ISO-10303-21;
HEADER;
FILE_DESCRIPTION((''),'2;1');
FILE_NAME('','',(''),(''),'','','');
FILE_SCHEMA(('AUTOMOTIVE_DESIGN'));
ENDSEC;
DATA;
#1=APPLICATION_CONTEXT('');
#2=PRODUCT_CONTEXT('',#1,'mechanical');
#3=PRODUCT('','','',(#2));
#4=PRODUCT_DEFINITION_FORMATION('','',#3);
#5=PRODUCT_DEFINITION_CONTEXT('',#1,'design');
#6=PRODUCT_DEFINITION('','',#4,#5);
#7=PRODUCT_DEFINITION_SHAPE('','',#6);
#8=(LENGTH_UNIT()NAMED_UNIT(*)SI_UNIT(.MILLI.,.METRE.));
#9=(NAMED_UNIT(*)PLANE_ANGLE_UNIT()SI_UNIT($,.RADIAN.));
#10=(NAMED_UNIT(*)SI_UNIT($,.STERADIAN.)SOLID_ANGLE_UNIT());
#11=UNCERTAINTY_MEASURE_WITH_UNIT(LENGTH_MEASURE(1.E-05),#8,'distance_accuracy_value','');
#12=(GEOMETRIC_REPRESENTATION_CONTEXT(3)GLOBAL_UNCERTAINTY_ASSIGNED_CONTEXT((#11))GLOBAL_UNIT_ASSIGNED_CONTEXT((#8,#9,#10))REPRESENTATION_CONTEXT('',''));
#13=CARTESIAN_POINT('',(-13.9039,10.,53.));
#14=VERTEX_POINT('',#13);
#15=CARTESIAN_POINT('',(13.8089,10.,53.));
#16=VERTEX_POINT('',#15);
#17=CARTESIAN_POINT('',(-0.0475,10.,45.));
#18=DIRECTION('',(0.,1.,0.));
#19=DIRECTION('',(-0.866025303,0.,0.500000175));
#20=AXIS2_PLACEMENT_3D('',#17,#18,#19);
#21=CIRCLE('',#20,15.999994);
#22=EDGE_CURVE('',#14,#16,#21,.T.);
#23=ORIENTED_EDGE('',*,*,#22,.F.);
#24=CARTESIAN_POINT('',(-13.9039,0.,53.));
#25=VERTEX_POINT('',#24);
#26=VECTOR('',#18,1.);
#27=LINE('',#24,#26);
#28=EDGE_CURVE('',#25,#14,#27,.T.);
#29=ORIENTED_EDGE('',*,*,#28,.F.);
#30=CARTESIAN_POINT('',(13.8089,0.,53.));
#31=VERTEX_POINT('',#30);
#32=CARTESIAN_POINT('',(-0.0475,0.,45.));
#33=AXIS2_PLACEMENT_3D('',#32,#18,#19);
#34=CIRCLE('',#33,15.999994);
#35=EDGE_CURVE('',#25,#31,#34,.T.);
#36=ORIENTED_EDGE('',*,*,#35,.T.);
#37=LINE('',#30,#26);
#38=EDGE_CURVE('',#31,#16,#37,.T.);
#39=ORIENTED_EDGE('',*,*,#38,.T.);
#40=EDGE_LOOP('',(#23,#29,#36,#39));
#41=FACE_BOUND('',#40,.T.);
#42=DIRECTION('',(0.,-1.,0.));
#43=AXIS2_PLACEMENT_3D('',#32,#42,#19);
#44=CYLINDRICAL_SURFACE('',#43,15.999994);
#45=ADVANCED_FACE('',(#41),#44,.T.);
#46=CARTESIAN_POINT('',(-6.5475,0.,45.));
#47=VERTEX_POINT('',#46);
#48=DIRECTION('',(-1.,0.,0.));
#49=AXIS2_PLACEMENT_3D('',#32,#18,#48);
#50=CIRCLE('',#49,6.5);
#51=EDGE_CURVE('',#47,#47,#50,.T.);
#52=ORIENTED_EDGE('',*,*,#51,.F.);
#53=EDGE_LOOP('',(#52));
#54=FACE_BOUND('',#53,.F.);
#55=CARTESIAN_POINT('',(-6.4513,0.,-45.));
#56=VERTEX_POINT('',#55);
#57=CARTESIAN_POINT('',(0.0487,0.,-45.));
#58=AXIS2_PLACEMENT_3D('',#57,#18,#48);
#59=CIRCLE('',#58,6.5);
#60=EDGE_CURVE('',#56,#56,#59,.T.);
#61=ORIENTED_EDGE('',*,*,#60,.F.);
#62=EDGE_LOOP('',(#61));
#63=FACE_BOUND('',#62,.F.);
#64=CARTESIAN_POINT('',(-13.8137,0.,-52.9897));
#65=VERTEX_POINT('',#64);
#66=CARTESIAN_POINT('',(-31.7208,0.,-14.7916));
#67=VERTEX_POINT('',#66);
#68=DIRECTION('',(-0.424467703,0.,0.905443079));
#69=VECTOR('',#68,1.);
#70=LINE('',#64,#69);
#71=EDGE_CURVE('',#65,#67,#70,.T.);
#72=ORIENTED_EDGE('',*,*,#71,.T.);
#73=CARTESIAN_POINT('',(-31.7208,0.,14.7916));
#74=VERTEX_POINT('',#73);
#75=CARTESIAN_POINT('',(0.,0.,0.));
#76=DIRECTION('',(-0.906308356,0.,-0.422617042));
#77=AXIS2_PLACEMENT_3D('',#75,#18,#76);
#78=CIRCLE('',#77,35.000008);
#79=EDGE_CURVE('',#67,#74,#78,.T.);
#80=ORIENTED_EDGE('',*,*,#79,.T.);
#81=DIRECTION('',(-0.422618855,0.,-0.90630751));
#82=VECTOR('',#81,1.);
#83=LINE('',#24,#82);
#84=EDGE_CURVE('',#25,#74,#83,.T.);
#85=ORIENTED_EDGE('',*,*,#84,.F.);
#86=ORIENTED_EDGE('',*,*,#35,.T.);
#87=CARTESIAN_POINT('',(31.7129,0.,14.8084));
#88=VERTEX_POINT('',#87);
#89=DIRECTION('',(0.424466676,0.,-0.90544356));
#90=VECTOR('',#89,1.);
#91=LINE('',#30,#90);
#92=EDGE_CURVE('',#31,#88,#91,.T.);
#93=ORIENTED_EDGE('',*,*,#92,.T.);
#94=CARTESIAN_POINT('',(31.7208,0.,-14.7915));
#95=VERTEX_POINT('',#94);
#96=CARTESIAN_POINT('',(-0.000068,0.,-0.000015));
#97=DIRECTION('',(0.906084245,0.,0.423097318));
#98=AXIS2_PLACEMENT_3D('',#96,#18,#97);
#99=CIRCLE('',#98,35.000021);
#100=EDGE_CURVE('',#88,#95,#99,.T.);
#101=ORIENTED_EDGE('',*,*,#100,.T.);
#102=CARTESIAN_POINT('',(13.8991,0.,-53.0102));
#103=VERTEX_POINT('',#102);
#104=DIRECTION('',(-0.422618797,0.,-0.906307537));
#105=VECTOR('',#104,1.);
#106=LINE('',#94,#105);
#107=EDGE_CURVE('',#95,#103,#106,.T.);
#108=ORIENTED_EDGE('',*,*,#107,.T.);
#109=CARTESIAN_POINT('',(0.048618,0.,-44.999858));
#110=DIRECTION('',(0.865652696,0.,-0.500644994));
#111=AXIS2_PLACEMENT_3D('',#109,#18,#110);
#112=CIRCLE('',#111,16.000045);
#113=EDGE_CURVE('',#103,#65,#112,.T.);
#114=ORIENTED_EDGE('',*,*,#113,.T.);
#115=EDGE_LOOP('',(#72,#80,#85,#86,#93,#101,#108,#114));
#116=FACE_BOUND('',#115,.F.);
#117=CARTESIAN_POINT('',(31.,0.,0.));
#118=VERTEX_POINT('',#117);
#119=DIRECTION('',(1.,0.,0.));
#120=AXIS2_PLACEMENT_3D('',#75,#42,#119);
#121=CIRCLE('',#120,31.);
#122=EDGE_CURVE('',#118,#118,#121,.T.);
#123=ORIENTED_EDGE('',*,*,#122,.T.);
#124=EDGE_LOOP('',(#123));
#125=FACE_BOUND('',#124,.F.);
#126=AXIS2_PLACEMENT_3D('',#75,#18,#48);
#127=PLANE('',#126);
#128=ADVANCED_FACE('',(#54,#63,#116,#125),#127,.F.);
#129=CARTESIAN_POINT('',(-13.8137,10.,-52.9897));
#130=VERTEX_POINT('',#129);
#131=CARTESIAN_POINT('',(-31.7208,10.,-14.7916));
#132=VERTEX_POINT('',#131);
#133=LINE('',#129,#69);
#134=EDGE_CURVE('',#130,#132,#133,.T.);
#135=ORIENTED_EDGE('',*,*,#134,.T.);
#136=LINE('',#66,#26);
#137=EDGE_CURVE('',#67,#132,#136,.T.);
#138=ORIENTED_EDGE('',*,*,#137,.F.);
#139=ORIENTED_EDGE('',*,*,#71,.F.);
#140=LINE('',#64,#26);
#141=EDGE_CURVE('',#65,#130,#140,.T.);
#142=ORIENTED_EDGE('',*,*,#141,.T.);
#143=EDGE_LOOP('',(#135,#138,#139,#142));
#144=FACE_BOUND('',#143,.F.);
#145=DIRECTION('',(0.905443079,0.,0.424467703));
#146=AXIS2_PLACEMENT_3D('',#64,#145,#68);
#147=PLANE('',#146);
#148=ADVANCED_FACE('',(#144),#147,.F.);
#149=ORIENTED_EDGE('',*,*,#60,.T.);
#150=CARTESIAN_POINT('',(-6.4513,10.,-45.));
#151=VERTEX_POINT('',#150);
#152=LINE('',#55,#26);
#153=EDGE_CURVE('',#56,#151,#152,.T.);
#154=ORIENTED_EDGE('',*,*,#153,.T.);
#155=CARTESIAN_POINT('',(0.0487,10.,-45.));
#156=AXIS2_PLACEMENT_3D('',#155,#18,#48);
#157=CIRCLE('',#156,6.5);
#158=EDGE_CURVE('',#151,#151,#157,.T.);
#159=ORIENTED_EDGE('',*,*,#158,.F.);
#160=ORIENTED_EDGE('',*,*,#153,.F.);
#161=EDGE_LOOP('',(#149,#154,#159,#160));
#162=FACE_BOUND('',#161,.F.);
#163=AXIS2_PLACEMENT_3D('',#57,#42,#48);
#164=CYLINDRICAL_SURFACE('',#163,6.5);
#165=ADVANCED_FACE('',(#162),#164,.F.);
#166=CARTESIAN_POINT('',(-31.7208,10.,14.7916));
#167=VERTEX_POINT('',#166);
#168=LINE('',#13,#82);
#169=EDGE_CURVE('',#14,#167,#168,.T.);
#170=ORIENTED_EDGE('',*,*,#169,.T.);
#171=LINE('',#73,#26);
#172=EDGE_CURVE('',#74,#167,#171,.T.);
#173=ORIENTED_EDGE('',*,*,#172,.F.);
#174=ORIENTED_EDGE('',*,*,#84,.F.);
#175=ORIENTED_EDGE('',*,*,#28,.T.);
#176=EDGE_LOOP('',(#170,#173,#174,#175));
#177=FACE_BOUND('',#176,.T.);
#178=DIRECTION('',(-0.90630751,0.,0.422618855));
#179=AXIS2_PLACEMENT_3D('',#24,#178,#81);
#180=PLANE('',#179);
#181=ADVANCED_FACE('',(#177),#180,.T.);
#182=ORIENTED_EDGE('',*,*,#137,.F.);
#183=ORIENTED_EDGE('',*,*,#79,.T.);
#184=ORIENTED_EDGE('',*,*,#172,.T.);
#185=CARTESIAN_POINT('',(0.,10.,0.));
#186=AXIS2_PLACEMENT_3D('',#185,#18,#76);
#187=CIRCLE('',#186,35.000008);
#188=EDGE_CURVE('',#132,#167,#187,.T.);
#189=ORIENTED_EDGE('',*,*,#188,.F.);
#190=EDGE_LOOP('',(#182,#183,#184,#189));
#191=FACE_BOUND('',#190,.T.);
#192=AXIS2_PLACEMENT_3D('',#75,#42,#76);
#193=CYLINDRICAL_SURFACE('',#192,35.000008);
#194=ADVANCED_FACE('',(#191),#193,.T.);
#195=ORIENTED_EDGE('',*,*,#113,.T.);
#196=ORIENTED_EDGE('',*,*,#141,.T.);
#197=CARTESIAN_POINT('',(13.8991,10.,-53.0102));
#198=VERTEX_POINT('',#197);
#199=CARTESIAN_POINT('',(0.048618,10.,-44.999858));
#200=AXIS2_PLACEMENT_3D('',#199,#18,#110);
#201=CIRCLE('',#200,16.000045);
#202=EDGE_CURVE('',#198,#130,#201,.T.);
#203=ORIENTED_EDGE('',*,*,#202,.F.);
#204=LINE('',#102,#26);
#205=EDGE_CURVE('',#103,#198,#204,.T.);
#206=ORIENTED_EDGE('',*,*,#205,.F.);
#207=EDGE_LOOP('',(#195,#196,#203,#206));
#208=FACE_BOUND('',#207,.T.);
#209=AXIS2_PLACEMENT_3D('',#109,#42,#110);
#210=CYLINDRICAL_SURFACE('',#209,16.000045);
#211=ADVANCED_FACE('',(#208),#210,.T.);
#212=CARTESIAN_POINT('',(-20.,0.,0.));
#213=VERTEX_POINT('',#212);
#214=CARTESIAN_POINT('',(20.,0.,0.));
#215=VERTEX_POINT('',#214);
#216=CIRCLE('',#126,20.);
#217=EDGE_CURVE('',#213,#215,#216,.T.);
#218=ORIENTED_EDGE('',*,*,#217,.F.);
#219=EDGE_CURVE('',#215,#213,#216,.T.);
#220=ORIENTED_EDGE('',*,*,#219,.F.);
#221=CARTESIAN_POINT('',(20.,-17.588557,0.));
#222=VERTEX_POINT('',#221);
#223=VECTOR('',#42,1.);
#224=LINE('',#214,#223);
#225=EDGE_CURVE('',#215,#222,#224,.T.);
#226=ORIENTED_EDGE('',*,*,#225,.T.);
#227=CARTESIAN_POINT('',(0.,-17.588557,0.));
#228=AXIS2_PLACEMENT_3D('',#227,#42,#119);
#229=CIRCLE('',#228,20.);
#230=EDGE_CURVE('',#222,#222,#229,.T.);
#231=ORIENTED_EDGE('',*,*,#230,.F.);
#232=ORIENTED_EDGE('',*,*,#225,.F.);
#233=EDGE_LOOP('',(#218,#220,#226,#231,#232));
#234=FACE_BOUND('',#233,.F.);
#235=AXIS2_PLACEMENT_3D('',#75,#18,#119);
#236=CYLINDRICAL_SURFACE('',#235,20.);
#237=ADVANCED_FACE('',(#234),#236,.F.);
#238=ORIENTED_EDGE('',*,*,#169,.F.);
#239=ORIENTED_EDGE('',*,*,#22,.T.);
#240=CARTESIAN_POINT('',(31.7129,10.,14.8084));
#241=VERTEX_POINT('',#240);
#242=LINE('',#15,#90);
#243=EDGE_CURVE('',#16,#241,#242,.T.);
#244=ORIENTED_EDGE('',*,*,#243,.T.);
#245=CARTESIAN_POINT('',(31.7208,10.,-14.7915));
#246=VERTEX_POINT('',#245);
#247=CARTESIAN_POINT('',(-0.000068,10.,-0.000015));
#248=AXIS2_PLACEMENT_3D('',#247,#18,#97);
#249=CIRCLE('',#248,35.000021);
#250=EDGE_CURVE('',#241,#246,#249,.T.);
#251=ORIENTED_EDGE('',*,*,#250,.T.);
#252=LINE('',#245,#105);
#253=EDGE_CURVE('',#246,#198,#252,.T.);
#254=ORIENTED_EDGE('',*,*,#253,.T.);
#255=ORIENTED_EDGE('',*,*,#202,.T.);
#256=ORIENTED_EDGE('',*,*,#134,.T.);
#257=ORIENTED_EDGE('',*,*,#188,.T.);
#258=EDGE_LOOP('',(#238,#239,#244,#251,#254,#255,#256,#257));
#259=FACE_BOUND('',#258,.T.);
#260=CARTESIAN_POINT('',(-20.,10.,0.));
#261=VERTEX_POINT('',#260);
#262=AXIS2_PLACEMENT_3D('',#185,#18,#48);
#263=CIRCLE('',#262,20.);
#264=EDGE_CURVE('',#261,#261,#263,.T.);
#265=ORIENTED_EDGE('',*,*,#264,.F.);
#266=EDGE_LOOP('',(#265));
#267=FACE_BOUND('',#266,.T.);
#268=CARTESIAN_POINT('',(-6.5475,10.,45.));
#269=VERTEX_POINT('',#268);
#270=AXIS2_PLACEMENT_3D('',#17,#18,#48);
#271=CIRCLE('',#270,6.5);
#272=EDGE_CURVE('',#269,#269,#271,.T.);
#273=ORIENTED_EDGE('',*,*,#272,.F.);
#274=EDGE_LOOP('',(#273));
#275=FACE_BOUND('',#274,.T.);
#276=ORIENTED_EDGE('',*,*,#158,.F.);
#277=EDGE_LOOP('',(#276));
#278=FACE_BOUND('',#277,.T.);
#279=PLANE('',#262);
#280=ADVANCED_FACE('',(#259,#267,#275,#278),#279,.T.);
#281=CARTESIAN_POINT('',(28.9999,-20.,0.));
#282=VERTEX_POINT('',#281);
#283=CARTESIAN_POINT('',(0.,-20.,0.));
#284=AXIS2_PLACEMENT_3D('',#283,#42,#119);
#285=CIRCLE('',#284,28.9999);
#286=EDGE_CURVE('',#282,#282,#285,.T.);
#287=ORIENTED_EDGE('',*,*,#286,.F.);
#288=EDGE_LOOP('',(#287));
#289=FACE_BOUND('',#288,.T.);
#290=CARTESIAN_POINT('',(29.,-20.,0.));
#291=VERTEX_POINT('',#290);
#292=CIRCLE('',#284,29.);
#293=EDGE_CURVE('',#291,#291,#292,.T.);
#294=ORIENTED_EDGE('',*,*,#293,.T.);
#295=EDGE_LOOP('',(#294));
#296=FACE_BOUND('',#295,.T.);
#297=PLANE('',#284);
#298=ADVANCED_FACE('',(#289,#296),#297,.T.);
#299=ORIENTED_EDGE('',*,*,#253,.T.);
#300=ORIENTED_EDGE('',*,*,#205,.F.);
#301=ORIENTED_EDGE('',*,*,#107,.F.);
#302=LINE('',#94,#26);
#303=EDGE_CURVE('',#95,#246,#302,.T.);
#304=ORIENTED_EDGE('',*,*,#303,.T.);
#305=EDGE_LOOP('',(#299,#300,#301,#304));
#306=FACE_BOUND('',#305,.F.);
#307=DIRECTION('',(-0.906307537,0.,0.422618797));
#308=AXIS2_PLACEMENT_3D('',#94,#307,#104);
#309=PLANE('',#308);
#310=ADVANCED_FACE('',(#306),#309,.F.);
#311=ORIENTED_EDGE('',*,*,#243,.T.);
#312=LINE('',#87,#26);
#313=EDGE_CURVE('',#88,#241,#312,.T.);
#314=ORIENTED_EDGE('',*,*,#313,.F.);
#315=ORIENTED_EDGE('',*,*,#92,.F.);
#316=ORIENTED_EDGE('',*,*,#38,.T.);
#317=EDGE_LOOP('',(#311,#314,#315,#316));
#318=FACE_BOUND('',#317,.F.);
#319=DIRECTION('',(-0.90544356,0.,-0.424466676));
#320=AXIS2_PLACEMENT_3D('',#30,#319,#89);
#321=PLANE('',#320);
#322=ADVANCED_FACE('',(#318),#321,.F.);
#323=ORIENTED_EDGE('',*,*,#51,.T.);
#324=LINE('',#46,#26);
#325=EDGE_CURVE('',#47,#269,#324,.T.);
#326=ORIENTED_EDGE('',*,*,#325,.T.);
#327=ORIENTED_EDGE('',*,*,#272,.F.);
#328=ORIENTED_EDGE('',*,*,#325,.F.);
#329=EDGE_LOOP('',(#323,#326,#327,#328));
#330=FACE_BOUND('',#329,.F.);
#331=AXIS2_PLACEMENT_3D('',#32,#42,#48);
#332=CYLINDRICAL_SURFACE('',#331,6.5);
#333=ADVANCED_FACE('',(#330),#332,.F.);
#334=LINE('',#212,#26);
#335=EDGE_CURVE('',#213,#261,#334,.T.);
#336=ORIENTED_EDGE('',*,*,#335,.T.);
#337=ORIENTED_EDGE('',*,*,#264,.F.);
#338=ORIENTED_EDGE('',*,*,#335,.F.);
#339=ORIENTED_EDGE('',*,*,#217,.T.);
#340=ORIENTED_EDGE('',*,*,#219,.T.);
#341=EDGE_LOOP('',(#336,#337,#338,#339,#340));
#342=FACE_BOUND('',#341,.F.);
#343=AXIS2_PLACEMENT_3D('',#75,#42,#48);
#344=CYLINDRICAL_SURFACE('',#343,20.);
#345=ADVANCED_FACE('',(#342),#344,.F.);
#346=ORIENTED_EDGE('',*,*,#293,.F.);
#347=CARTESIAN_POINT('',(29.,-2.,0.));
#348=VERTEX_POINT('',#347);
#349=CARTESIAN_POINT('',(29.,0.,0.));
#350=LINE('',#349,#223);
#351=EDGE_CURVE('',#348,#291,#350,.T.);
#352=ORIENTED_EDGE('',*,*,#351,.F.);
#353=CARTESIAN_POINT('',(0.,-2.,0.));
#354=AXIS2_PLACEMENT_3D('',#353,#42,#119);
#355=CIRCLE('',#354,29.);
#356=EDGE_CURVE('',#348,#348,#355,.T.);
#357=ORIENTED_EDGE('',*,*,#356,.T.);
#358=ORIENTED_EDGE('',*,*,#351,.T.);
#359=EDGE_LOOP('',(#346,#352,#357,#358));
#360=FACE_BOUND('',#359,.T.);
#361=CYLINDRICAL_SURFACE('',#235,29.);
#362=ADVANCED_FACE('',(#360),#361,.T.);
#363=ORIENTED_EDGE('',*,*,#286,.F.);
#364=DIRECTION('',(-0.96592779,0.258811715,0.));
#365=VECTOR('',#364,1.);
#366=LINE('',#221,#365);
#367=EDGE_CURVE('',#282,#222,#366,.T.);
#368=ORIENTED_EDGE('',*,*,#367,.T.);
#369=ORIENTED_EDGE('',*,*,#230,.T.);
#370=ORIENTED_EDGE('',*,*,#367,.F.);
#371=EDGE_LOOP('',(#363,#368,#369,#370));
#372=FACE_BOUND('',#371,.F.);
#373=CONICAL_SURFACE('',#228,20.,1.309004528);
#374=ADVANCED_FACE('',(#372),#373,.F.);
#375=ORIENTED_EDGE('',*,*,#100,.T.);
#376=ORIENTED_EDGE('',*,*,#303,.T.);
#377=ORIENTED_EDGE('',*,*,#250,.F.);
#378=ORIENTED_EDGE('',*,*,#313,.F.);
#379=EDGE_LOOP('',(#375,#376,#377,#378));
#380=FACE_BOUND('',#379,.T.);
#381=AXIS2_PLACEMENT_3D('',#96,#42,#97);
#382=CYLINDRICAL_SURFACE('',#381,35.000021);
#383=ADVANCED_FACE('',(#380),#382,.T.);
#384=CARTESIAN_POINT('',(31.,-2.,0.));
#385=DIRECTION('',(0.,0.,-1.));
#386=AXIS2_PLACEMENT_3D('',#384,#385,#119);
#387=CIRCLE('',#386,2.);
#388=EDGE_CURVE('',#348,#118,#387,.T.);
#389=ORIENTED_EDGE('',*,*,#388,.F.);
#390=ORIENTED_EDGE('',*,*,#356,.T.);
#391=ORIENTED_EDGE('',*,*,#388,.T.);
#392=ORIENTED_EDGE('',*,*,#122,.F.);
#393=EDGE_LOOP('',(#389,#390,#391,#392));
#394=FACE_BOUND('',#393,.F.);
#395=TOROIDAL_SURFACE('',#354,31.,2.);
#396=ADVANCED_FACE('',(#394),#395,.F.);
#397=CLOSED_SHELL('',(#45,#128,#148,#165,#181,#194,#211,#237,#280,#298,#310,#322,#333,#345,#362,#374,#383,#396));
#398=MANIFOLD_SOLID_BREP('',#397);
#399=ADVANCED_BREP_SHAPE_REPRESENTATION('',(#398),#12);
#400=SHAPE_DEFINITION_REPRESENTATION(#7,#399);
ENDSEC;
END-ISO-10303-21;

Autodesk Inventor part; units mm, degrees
ref_plane "YZ Plane" through (0, 0, 0) normal (1, 0, 0) x (0, 1, 0)
ref_plane "XZ Plane" through (0, 0, 0) normal (0, 1, 0) x (-1, 0, 0)
ref_plane "XY Plane" through (0, 0, 0) normal (0, 0, 1) x (1, 0, 0)
sketch "スケッチ1" plane through (0, 0, 0) normal (0, 1, 0) x (-1, 0, 0)
  circle A0 centre (0, 0) radius 20
  circle A1 centre (0, 0) radius 29
  arc A2 (31.7208, -14.7916) -> (31.7208, 14.7916) centre (0, 0) ccw
  line L0 (0, 0) -> (31.7208, 14.7916) construction
  line L1 (0, 0) -> (35, 0) construction
  line L2 (0, 0) -> (31.7208, -14.7916) construction
  arc A3 (-31.7129, 14.8084) -> (-31.7208, -14.7915) centre (0, 0) ccw
  circle A4 centre (0.0475, 45) radius 6.5
  circle A5 centre (-0.0487, -45) radius 6.5
  arc A6 (13.9039, 53) -> (-13.8089, 53) centre (0.0475, 45) ccw
  line L3 (0.0475, 45) -> (13.9039, 53) construction
  line L4 (0.0475, 45) -> (16.0475, 45) construction
  line L5 (0.0475, 45) -> (-13.8089, 53) construction
  arc A7 (-13.8991, -53.0102) -> (13.8137, -52.9897) centre (-0.0487, -45) ccw
  line L6 (-0.0487, -45) -> (-13.8991, -53.0102) construction
  line L7 (-0.0487, -45) -> (13.8137, -52.9897) construction
  line L8 (13.9039, 53) -> (31.7208, 14.7916)
  line L9 (-13.8089, 53) -> (-31.7129, 14.8084)
  line L10 (-31.7208, -14.7915) -> (-13.8991, -53.0102)
  line L11 (13.8137, -52.9897) -> (31.7208, -14.7916)
  dimension "d0" = 40
  dimension "d1" = 58
  dimension "d2" = 35
  dimension "d3" = 25
  dimension "d4" = 50
  dimension "d5" = 35
  dimension "d6" = 13
  dimension "d7" = 13
  dimension "d8" = 45
  dimension "d9" = 45
  dimension "d10" = 16
  dimension "d11" = 30
  dimension "d12" = 120
  dimension "d13" = 16
  dimension "d14" = 120
extrude "押し出し1" add sketch "スケッチ1" along normal blind 10 contours A1 | L11 A7 L10 A3 L9 A6 L8 A2
sketch "スケッチ2" plane through (0, 0, 0) normal (0, -1, 0) x (1, 0, 0)
  circle A0 centre (0, 0) radius 29
  circle A1 centre (0, 0) radius 20
  dimension "d17" = 58
extrude "押し出し2" add sketch "スケッチ2" along normal blind 20
chamfer "面取り1" distance 9 angle 15 1 edges at (-20, -20, 0) measured on face at (25.5254, -20, -3.9088)
fillet "フィレット1" radius 2 1 edges at (-29, 0, 0)
properties part number "パッキン押え"
